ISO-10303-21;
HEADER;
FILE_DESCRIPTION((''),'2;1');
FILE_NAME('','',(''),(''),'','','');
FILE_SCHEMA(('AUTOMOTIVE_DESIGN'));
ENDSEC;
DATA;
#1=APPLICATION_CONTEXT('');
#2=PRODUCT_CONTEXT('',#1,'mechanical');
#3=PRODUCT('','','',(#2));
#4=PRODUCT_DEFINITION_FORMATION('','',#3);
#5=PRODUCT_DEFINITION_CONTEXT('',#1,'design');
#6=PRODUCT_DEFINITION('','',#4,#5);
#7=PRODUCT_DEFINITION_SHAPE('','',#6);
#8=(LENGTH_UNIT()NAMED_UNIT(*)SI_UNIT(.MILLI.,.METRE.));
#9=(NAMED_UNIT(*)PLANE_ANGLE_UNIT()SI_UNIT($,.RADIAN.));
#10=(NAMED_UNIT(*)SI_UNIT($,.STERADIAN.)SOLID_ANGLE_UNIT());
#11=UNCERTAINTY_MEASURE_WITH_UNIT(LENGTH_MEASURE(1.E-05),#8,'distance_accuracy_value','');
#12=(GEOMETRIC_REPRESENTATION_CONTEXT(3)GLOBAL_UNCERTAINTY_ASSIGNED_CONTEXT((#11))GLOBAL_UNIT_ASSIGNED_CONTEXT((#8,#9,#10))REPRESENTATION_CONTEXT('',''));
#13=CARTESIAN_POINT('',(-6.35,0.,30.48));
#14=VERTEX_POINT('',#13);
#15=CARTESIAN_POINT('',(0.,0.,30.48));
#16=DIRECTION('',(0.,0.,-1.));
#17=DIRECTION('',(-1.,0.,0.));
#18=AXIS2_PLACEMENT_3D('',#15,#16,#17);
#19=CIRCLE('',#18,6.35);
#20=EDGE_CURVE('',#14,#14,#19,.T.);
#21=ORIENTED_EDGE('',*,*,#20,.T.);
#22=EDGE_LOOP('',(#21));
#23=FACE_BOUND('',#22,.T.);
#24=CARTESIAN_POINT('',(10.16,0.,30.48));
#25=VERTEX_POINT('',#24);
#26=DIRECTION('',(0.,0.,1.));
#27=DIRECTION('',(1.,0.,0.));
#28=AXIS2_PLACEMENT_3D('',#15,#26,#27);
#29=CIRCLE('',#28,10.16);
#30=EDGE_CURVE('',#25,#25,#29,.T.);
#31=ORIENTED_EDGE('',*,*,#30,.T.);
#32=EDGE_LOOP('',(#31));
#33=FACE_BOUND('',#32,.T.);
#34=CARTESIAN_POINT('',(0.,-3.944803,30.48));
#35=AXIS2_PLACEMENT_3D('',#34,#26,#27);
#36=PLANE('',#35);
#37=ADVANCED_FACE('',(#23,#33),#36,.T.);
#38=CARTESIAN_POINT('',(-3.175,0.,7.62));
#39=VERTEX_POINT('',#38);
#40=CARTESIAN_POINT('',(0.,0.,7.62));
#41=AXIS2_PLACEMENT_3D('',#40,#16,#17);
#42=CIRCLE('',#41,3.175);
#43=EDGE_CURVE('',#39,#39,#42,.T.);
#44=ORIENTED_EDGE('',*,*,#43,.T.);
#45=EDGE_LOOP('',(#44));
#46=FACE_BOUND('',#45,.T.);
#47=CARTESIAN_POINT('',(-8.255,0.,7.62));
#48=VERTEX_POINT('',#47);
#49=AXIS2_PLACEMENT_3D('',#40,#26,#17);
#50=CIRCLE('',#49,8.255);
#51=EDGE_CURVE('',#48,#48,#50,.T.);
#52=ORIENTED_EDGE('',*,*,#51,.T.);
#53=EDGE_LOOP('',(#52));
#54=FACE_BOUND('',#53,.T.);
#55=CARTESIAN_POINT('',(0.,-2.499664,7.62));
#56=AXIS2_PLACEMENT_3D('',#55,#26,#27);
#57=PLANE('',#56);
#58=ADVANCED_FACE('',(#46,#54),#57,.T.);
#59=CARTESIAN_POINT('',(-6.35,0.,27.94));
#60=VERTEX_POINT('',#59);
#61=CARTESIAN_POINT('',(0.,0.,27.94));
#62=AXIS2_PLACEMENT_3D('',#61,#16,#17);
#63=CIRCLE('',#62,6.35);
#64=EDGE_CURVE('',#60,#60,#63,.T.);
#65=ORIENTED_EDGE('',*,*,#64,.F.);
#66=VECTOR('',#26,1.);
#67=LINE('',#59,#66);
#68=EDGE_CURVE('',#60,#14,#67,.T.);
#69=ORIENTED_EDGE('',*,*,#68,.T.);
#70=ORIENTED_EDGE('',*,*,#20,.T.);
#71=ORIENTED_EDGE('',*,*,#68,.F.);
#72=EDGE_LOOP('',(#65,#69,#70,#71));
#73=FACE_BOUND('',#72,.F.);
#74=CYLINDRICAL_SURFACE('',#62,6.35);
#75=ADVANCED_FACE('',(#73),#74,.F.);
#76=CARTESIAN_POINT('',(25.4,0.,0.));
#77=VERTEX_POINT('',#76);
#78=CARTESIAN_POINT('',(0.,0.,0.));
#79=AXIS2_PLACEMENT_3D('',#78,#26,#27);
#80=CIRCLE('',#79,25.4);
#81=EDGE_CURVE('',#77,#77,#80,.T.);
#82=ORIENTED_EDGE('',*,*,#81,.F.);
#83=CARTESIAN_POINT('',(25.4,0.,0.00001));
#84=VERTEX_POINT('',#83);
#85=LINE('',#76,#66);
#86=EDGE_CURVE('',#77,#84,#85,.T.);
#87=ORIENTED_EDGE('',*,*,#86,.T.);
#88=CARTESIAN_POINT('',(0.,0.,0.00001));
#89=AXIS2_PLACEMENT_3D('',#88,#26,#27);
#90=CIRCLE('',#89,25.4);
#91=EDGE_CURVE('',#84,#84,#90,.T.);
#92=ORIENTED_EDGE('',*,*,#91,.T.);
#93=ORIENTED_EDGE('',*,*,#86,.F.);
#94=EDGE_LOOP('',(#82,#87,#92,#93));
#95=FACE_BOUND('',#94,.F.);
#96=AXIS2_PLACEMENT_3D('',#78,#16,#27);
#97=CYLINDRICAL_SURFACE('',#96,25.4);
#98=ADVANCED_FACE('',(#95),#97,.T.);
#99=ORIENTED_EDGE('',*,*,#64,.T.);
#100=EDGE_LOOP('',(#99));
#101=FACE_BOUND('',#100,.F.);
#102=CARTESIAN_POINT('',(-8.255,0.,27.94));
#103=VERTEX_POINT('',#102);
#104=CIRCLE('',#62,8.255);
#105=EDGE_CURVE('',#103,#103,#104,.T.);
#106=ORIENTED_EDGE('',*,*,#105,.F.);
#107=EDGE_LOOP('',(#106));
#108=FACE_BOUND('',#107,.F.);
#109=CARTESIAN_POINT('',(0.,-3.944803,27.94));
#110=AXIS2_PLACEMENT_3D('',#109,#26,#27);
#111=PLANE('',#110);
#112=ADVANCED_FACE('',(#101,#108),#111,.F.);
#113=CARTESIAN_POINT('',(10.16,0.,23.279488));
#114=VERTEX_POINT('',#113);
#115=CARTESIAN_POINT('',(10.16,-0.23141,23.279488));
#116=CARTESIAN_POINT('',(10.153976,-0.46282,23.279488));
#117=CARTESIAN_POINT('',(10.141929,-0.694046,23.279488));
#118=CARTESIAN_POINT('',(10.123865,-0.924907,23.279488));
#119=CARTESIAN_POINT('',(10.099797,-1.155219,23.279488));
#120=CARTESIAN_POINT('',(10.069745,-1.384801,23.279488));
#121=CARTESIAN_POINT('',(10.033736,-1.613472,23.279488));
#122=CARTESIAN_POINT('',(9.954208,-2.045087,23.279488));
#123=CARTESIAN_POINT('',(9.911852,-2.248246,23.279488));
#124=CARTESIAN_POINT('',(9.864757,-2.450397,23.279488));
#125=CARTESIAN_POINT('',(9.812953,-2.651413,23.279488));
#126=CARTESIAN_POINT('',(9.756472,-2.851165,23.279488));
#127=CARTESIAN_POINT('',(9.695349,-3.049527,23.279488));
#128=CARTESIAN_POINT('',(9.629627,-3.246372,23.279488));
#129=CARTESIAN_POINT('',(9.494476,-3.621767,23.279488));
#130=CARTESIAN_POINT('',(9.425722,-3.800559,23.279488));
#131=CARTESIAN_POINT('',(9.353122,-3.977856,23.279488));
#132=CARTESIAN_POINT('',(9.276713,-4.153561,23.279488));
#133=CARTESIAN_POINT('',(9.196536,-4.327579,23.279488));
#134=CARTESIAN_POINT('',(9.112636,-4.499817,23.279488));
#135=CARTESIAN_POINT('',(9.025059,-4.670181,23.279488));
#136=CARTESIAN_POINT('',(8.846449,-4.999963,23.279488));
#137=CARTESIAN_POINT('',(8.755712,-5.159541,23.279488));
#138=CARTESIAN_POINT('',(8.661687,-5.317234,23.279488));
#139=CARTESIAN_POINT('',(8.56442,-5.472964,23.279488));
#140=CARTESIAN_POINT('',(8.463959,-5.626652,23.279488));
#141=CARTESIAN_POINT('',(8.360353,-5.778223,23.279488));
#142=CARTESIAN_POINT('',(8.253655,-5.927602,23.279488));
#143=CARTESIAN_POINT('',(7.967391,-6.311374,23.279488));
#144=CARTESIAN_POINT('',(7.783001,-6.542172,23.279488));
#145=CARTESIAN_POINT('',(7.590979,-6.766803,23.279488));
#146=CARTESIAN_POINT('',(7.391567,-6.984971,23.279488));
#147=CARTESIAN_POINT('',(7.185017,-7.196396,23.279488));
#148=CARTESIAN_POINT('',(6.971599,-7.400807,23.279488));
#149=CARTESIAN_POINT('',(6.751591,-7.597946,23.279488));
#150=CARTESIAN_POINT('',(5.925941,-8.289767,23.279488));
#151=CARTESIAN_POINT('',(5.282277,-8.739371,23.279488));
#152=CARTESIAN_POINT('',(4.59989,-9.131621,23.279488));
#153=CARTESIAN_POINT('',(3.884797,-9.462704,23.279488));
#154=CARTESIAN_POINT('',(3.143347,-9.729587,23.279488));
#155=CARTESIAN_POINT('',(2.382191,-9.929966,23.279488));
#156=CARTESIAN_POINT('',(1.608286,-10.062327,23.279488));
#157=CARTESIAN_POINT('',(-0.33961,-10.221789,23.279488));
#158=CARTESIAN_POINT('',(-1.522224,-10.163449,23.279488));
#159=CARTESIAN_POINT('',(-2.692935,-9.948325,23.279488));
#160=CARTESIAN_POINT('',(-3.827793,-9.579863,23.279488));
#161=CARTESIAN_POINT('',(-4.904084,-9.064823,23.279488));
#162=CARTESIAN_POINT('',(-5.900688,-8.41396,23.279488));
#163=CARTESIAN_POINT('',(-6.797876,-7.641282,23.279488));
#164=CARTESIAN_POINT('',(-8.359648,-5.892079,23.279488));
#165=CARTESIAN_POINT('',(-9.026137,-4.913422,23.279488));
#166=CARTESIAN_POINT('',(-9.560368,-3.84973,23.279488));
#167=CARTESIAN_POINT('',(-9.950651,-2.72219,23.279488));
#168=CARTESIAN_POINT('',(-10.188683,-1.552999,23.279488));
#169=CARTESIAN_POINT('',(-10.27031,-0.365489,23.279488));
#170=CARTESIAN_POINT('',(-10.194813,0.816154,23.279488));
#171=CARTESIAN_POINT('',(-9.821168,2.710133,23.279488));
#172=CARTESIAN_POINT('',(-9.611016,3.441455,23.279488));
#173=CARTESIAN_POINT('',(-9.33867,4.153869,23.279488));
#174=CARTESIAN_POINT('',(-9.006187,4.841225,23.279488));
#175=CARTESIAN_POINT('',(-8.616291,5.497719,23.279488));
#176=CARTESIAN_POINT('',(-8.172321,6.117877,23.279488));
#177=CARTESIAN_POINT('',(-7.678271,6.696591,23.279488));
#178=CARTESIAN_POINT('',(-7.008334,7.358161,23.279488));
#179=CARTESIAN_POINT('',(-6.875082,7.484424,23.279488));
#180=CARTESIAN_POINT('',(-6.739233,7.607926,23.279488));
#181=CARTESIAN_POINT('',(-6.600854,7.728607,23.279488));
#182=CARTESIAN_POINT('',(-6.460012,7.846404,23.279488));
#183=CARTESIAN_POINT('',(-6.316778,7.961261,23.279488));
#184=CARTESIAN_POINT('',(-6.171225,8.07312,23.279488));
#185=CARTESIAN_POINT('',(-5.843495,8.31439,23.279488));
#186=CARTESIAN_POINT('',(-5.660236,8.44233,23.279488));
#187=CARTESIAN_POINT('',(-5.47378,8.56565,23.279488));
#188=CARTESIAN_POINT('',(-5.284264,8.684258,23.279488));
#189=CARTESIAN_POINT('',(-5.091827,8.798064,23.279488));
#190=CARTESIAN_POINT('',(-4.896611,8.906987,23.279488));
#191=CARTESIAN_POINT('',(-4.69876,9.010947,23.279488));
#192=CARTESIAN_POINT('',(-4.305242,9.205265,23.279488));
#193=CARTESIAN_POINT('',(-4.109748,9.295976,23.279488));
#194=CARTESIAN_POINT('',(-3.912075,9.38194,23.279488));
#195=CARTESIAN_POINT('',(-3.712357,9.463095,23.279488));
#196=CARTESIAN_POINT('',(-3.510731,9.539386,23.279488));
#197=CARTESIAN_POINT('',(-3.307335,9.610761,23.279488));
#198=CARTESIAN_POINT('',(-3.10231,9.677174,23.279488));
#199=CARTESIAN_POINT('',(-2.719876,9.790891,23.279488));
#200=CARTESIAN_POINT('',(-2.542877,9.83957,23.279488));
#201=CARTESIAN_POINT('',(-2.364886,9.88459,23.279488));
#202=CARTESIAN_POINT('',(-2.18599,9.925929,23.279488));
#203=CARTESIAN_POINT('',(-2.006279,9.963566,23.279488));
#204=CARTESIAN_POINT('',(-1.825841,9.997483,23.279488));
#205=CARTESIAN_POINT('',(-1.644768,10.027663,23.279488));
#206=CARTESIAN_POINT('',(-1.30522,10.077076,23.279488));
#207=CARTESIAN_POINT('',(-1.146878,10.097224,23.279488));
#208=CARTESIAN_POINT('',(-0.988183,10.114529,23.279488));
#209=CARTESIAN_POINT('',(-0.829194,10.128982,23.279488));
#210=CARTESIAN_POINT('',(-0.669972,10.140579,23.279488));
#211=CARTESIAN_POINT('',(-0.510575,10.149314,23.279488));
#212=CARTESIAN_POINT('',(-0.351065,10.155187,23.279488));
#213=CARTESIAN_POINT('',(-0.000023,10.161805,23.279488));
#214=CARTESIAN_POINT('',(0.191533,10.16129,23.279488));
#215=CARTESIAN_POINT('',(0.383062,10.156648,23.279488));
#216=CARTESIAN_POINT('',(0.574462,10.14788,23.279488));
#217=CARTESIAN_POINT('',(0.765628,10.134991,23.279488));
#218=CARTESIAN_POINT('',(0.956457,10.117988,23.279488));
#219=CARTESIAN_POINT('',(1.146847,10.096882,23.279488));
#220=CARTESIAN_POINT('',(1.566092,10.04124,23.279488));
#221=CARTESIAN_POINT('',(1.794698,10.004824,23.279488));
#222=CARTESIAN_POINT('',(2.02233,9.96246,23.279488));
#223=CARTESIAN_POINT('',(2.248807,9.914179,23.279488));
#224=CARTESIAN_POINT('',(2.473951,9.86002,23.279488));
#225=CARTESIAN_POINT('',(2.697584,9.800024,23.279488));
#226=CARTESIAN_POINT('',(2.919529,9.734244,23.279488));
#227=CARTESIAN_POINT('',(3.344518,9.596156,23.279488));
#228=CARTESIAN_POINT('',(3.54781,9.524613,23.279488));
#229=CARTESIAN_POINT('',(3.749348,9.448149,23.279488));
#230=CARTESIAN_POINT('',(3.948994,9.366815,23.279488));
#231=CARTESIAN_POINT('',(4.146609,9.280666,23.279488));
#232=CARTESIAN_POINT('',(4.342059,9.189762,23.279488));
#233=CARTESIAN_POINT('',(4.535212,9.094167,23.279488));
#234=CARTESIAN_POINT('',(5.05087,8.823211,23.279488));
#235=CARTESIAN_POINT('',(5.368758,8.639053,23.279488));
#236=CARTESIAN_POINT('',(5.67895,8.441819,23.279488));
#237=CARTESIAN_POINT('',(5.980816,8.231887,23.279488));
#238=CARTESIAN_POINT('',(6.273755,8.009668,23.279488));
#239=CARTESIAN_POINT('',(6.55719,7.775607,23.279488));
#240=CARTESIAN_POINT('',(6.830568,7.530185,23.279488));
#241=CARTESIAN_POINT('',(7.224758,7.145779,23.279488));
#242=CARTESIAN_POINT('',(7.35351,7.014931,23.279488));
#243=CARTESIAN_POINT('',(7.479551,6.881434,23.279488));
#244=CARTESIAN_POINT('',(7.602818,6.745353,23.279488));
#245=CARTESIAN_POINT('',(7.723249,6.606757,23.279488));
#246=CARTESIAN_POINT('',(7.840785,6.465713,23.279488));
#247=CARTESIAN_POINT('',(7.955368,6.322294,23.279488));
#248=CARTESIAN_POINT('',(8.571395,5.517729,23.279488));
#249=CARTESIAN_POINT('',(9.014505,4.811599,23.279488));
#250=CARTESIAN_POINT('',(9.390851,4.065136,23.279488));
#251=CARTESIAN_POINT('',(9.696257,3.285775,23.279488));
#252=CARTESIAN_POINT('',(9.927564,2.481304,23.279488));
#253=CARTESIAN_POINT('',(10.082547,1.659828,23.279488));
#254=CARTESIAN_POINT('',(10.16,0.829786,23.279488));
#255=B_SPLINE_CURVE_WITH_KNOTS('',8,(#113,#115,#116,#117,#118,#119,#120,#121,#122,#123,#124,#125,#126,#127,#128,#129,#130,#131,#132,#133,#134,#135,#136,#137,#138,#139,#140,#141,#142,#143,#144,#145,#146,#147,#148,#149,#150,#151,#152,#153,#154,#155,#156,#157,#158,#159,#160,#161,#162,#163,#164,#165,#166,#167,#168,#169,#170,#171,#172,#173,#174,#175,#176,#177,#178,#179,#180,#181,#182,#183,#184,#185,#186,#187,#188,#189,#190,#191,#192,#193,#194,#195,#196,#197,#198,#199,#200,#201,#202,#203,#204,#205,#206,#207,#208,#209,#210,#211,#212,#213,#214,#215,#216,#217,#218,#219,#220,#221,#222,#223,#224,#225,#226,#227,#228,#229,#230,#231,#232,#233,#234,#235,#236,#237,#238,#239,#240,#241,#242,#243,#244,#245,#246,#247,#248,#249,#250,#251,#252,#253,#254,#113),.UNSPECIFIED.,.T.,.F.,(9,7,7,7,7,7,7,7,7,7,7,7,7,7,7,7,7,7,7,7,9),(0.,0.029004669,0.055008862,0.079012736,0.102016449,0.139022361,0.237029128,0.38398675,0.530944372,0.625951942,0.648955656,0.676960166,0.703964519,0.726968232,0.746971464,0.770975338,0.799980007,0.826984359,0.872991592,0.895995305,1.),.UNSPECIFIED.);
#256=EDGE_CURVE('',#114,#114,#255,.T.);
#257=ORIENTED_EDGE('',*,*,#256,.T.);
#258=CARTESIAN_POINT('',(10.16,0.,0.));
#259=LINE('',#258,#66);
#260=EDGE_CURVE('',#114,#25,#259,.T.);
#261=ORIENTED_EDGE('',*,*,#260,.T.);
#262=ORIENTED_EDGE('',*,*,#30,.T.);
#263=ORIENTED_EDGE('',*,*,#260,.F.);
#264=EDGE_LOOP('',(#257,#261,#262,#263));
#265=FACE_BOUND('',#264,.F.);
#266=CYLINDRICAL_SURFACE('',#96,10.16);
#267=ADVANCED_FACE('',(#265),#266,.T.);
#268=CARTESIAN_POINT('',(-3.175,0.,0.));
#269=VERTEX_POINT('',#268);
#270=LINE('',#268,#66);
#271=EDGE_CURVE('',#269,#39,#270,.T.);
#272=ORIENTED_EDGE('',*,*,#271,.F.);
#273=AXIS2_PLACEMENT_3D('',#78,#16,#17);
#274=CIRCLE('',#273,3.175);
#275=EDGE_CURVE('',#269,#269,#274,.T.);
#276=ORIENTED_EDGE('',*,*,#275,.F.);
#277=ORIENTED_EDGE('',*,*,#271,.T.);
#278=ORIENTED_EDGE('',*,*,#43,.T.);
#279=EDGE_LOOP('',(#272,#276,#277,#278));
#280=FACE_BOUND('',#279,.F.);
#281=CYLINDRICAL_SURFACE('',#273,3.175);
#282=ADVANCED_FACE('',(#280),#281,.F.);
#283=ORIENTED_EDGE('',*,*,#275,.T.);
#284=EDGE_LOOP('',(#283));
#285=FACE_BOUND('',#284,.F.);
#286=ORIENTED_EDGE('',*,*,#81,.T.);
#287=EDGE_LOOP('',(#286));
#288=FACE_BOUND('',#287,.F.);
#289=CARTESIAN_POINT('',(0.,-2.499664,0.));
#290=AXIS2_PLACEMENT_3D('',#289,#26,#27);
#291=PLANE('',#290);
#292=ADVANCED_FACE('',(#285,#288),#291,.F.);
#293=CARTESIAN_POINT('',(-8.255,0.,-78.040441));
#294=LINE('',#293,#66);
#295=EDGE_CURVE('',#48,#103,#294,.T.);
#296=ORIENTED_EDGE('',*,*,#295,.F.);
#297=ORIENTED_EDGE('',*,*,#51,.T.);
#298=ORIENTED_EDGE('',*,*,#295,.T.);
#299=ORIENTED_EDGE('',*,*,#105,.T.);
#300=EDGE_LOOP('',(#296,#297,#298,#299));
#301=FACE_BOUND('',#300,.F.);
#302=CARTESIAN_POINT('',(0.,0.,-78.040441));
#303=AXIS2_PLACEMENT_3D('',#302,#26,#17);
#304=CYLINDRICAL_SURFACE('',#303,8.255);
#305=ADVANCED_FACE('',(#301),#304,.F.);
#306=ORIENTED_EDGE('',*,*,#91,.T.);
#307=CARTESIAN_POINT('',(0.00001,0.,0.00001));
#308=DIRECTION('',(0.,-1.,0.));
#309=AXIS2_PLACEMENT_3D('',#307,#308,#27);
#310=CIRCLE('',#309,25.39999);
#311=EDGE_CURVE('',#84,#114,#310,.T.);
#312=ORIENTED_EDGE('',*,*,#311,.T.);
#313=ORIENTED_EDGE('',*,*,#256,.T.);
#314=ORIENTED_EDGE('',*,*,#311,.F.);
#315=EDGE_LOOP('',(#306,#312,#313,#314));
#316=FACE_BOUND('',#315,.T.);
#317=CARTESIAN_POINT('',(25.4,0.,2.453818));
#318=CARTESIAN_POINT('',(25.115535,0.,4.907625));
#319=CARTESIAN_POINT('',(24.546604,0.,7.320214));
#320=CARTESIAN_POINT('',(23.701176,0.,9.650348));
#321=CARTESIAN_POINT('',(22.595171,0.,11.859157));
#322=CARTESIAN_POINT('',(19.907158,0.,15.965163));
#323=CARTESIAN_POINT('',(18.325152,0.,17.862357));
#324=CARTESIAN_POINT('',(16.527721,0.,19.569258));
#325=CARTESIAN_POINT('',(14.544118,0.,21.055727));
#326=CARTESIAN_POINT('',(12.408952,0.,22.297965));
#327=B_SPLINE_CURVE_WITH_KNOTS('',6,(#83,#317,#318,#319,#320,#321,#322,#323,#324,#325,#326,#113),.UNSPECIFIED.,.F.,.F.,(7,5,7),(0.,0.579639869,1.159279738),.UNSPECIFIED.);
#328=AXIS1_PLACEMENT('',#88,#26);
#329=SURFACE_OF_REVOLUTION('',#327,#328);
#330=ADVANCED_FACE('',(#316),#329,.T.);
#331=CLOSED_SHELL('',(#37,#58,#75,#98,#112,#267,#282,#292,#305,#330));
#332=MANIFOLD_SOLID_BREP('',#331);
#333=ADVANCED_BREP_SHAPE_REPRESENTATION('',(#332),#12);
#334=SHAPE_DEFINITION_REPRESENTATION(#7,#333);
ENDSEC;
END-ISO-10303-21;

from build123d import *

# Parameters (mm, degrees)
F1_R     = 25.4
F1_R_2   = 10.16
F2_DEPTH = 25.4
F3_R     = 25.39999
F4_DEPTH = 30.48
F7_D     = 16.51
F8_DEPTH = 7.62
F9_START = 27.94
F9_DEPTH = 2.54


# Not quite as in the source:
# - a variable given as a bare number and used for a length is read in inches; the dataset says mm whatever the document's units were
# - a fillet or chamfer is up to 0.001 mm smaller than in the source, because OpenCascade refuses the exact size


with BuildPart() as f2:
    # F1 (on Top) → F2 (new body)
    with BuildSketch(Plane.XY):
        Circle(F1_R)
        Circle(F1_R_2, mode=Mode.SUBTRACT)
        Circle(F1_R_2)
    extrude(amount=F2_DEPTH)

    # F3 (radius 25.4 in the source; OpenCascade refuses exactly that, so slightly less here)
    f3_edges = [f2.edges().sort_by_distance(p)[0] for p in [
        (-25.4, 0, 25.4),
    ]]
    fillet(f3_edges, radius=F3_R)

    # F1 (on Top) → F4 (join)
    with BuildSketch(Plane.XY):
        Circle(F1_R_2)
    extrude(amount=F4_DEPTH)

    # F7 (through all)
    with Locations(Plane(origin=(0, 0, 0), x_dir=(1, 0, 0), z_dir=(0, 0, -1))):
        with Locations((0, 0)):
            Hole(F7_D / 2)

    # F6 (on face) → F8 (join)
    with BuildSketch(Plane.XY):
        with BuildLine():
            ThreePointArc((-6.35, 0), (0, -6.35), (6.35, 0))
            Line((6.35, 0), (3.175, 0))
            ThreePointArc((3.175, 0), (0, -3.175), (-3.175, 0))
            Line((-3.175, 0), (-6.35, 0))
        make_face()
        with BuildLine():
            Line((3.175, 0), (6.35, 0))
            ThreePointArc((6.35, 0), (0, 6.35), (-6.35, 0))
            Line((-6.35, 0), (-3.175, 0))
            ThreePointArc((-3.175, 0), (0, 3.175), (3.175, 0))
        make_face()
        with BuildLine():
            Line((8.255, 0), (6.35, 0))
            ThreePointArc((6.35, 0), (0, -6.35), (-6.35, 0))
            Line((-6.35, 0), (-8.255, 0))
            ThreePointArc((-8.255, 0), (0, -8.255), (8.255, 0))
        make_face()
        with BuildLine():
            ThreePointArc((-6.35, 0), (0, 6.35), (6.35, 0))
            Line((6.35, 0), (8.255, 0))
            ThreePointArc((8.255, 0), (0, 8.255), (-8.255, 0))
            Line((-8.255, 0), (-6.35, 0))
        make_face()
    extrude(amount=F8_DEPTH)

    # F6 (on face) → F9 (join)
    with BuildSketch(Plane.XY.offset(F9_START)):
        with BuildLine():
            Line((8.255, 0), (6.35, 0))
            ThreePointArc((6.35, 0), (0, -6.35), (-6.35, 0))
            Line((-6.35, 0), (-8.255, 0))
            ThreePointArc((-8.255, 0), (0, -8.255), (8.255, 0))
        make_face()
        with BuildLine():
            ThreePointArc((-6.35, 0), (0, 6.35), (6.35, 0))
            Line((6.35, 0), (8.255, 0))
            ThreePointArc((8.255, 0), (0, 8.255), (-8.255, 0))
            Line((-8.255, 0), (-6.35, 0))
        make_face()
    extrude(amount=F9_DEPTH)


solid = f2.part
